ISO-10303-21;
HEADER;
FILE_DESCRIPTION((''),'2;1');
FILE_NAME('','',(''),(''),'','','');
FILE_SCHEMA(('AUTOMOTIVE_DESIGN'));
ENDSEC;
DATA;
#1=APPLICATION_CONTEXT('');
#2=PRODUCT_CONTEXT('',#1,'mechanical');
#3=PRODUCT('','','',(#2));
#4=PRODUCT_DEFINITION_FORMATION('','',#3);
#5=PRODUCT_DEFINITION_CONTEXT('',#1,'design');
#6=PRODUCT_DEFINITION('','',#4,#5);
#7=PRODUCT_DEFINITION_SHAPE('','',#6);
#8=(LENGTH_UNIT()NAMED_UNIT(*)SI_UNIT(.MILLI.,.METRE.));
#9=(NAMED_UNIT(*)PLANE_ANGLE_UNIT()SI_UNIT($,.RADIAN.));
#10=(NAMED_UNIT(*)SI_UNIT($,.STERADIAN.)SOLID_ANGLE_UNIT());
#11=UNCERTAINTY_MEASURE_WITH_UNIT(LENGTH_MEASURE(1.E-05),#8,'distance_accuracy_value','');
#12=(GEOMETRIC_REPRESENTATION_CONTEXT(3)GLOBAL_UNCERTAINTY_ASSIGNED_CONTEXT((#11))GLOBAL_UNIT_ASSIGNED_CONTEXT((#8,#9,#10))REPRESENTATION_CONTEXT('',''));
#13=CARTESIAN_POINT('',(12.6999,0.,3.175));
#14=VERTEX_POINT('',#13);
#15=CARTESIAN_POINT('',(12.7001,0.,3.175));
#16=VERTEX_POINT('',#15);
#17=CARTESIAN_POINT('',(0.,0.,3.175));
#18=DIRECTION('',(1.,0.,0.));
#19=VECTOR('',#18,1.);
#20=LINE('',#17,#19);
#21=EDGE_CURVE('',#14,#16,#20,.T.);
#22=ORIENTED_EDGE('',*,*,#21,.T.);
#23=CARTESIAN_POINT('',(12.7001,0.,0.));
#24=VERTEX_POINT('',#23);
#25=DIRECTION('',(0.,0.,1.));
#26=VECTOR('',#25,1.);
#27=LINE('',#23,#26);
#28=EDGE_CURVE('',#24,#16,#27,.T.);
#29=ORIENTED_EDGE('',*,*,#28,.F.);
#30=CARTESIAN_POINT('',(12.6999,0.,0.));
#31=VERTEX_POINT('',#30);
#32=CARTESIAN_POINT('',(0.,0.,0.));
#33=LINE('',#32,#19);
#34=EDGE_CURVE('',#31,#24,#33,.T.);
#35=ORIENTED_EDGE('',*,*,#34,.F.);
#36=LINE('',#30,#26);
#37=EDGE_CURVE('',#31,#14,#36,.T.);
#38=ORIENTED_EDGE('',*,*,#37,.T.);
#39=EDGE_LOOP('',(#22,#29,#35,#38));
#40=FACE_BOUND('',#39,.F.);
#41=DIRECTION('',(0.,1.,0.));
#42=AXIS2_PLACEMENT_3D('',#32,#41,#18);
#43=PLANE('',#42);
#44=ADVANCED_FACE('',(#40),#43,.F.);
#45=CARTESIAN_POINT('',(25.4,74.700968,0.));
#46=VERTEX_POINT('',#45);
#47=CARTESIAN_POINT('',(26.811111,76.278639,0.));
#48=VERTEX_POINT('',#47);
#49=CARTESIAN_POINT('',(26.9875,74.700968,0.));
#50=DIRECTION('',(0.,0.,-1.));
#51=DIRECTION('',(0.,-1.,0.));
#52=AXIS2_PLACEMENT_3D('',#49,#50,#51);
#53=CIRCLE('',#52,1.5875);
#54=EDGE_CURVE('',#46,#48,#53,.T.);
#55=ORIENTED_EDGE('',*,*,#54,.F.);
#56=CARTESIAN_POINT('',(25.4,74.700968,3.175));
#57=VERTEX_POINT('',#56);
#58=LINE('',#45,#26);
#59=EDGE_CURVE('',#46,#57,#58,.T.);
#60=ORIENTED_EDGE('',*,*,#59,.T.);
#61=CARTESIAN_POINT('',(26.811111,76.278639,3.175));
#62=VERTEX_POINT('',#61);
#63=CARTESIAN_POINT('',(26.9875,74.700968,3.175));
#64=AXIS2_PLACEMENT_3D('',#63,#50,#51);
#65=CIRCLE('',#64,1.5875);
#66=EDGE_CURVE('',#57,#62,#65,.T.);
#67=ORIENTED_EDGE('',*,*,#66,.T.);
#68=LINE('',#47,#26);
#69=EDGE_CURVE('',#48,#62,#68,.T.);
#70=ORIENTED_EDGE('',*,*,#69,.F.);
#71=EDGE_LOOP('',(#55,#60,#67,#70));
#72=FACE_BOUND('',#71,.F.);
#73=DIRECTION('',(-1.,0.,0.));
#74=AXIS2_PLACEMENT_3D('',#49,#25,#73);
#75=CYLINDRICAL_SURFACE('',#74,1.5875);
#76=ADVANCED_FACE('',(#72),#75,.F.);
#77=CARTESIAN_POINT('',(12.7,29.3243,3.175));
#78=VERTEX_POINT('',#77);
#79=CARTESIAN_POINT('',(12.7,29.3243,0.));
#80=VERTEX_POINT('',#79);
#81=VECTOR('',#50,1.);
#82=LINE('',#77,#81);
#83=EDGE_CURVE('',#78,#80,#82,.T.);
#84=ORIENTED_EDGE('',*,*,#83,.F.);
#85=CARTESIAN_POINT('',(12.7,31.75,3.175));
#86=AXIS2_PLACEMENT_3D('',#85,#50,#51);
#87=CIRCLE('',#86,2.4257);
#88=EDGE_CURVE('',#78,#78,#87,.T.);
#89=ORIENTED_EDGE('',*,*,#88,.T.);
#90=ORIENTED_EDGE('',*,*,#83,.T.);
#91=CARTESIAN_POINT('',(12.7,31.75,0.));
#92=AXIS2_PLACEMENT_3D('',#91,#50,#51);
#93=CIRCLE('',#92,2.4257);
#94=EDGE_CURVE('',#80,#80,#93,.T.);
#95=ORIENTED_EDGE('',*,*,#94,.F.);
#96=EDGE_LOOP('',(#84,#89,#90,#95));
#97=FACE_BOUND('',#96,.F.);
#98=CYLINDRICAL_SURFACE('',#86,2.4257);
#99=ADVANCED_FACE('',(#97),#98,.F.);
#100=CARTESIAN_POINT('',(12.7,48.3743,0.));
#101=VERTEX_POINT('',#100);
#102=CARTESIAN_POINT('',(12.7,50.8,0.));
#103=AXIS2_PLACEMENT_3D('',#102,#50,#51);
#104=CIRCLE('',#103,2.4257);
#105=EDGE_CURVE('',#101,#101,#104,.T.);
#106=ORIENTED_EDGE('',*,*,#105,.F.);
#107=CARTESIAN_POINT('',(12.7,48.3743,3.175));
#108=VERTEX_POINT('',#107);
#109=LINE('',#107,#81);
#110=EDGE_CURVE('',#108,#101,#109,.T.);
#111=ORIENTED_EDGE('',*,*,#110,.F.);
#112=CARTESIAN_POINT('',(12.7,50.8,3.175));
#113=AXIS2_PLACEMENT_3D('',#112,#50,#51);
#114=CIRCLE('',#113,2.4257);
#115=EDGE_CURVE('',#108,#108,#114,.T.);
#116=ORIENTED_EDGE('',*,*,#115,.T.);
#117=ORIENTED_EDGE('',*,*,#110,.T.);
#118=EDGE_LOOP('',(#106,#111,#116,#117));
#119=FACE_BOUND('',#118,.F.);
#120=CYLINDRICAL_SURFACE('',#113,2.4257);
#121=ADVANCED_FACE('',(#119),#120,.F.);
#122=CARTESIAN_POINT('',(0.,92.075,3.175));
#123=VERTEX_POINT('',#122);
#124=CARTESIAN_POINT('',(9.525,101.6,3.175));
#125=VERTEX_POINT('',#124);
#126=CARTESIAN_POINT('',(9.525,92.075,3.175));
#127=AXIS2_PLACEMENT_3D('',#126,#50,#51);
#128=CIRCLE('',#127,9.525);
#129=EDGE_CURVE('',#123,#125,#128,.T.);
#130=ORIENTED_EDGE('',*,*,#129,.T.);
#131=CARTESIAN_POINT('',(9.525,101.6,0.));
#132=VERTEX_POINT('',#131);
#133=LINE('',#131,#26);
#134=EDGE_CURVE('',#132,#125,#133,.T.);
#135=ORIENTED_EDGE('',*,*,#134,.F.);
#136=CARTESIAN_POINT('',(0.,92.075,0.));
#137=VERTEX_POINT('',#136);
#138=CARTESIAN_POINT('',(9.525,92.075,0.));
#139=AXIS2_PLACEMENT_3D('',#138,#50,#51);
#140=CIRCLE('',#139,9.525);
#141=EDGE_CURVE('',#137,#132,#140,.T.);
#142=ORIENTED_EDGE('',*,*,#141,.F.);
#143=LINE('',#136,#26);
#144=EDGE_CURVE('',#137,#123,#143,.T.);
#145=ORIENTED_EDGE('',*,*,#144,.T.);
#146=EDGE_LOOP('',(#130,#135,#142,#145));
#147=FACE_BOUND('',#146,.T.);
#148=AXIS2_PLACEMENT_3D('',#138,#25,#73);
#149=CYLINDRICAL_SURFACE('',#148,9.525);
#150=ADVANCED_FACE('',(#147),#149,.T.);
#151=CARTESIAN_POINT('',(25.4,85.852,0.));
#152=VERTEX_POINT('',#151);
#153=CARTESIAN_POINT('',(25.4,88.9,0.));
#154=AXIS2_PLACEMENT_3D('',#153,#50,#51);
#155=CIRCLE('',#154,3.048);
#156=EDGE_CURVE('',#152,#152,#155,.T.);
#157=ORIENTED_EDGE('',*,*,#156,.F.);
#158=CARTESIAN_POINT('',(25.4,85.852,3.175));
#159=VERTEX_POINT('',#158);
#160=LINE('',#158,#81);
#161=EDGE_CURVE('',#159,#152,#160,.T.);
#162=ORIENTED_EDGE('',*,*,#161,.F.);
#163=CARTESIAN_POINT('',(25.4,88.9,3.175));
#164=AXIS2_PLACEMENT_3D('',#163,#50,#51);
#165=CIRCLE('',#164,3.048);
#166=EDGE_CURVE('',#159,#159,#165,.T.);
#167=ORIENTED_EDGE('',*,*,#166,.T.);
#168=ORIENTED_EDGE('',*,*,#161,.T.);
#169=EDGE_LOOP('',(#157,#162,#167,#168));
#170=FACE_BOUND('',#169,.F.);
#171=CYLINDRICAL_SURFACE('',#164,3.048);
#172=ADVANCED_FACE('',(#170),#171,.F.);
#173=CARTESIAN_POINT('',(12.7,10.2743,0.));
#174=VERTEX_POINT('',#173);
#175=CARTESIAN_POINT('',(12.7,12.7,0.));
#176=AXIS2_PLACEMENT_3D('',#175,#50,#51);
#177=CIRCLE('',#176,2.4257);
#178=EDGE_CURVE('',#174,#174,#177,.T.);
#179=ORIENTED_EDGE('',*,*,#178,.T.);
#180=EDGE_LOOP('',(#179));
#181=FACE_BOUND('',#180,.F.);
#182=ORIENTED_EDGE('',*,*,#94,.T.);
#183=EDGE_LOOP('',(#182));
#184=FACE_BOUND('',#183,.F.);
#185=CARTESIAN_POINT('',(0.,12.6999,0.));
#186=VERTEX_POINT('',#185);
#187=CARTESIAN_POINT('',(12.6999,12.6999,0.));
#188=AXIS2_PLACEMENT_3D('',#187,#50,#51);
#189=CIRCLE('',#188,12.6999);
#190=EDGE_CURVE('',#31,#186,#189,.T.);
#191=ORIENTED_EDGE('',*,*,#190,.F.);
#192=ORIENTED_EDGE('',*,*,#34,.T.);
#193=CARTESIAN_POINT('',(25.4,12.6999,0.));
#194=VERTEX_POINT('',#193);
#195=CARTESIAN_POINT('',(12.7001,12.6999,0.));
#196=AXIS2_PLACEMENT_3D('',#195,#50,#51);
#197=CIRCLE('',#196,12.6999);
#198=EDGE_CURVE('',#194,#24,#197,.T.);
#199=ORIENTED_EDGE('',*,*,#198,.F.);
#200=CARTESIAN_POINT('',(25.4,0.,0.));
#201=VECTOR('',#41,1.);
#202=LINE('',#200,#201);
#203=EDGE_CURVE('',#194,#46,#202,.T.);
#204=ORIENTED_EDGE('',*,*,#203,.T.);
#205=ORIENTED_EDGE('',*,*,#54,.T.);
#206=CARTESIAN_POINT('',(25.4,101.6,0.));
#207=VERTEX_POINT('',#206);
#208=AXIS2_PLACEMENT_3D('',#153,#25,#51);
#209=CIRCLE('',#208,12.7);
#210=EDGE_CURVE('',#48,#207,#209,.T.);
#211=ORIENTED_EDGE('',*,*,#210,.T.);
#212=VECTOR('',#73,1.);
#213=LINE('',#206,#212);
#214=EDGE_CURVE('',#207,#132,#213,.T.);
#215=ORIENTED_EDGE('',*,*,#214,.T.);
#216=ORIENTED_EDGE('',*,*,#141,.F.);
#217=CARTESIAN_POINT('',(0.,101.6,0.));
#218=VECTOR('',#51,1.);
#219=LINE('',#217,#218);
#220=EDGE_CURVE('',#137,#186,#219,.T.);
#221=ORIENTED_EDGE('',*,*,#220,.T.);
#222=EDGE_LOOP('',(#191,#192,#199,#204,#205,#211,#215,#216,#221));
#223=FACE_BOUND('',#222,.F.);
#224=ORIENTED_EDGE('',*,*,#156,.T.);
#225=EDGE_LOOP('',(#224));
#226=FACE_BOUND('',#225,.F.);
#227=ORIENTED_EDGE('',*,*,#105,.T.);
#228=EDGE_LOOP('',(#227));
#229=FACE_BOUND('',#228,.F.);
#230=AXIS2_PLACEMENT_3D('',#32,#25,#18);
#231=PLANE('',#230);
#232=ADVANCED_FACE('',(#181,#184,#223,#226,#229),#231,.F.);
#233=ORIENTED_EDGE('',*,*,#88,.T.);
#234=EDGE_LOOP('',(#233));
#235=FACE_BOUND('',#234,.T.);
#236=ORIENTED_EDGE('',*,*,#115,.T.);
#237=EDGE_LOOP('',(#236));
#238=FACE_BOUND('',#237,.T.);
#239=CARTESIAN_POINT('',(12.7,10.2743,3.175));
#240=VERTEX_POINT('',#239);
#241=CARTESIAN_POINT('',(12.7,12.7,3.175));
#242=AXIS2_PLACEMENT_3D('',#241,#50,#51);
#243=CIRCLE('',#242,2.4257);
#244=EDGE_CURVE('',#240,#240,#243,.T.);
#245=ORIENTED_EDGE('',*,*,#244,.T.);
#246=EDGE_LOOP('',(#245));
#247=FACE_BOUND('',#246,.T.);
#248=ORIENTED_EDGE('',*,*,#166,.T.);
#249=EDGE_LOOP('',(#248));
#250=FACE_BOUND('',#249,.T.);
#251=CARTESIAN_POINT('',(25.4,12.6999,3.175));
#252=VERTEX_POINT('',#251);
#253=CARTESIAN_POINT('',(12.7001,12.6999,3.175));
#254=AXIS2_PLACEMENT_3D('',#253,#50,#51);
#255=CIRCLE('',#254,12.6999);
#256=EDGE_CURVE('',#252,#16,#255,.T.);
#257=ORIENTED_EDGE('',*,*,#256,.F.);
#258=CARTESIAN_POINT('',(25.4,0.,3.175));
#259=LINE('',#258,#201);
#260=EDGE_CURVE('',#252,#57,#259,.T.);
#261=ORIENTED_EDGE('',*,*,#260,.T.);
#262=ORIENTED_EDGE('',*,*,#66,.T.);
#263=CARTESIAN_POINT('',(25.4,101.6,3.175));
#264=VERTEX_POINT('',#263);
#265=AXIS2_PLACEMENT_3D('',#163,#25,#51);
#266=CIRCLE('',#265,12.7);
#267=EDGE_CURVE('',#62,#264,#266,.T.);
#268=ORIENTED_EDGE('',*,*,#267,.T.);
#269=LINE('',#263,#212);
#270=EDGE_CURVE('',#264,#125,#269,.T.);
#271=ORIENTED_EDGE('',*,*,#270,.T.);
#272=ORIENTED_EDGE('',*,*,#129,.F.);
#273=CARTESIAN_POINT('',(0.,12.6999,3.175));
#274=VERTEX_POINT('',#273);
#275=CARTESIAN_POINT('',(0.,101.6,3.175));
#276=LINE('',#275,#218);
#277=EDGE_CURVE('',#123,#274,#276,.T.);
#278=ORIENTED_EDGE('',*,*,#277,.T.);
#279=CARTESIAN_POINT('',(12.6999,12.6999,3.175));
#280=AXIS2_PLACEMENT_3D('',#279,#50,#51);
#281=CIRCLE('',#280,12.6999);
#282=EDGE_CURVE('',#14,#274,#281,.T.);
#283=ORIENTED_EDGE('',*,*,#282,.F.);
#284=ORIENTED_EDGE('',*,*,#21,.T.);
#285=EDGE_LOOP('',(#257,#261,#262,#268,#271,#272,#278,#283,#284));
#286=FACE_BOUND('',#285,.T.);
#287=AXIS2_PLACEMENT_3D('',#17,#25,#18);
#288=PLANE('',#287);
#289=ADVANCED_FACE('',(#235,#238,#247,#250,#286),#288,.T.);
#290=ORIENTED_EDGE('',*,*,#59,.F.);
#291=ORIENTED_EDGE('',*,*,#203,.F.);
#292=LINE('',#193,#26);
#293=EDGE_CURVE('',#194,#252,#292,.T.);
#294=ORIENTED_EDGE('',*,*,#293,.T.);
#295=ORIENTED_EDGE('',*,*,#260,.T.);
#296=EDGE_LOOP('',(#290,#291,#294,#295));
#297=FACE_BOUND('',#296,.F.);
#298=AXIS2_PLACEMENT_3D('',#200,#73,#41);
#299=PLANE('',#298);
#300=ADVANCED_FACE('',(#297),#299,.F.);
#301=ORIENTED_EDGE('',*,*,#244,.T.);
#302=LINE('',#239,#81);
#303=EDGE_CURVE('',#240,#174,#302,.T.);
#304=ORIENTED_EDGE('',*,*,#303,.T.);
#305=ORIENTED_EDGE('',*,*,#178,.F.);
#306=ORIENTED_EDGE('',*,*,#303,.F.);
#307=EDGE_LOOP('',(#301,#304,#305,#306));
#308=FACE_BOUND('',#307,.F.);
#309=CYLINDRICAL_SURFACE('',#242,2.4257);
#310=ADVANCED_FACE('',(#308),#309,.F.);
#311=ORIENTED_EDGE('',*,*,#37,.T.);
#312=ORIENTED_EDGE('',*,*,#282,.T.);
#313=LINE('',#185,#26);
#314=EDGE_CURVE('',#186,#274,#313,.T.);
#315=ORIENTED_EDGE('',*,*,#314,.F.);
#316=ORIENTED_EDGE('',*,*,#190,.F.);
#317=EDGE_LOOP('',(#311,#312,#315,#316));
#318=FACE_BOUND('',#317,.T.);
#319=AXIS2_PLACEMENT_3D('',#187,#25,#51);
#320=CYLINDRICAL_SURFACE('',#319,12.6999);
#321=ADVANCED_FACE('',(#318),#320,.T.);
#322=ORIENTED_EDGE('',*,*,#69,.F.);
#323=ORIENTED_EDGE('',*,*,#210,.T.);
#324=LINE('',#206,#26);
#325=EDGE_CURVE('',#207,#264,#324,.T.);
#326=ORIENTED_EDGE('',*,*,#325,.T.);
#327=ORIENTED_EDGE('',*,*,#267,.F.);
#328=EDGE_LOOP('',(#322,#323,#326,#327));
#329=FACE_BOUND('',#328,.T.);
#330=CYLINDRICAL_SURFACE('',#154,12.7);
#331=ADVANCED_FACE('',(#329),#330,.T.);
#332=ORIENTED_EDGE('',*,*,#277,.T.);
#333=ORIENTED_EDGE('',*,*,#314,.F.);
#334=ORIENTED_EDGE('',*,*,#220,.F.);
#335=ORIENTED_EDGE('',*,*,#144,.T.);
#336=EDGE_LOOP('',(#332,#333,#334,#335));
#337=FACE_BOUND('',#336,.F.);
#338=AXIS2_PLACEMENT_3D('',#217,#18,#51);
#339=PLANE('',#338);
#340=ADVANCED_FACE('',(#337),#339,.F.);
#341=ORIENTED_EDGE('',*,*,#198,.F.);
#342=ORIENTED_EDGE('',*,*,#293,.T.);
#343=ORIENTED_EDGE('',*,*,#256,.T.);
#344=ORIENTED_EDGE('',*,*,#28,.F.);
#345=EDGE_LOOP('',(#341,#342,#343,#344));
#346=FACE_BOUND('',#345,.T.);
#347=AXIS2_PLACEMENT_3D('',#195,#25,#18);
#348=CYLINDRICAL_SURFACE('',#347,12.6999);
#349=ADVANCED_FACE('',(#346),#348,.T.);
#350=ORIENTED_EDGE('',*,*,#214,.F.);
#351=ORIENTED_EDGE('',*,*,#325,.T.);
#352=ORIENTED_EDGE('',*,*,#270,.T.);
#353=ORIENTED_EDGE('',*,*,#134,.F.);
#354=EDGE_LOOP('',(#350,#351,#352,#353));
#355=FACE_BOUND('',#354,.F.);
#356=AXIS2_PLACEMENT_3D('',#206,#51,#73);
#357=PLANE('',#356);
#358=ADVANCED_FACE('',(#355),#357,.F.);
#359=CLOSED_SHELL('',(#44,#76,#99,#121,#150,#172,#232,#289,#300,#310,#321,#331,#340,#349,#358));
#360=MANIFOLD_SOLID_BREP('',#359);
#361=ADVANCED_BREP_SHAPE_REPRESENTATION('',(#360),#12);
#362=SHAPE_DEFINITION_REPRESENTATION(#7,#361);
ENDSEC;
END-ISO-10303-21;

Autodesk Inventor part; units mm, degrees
ref_plane "YZ Plane" through (0, 0, 0) normal (1, 0, 0) x (0, 1, 0)
ref_plane "XZ Plane" through (0, 0, 0) normal (0, 1, 0) x (-1, 0, 0)
ref_plane "XY Plane" through (0, 0, 0) normal (0, 0, 1) x (1, 0, 0)
sketch "Sketch1" plane through (0, 0, 0) normal (0, 0, 1) x (1, 0, 0)
  line L0 (0, 0) -> (25.4, 0)
  line L1 (25.4, 0) -> (25.4, 101.6)
  line L2 (25.4, 101.6) -> (0, 101.6)
  line L3 (0, 101.6) -> (0, 0)
  arc A0 (25.4, 76.2) -> (25.4, 101.6) centre (25.4, 88.9) ccw
  dimension "d0" = 101.6
  dimension "d1" = 25.4
  dimension "d2" = 25.4
extrude "Extrusion1" add sketch "Sketch1" along normal blind 3.175
sketch "Sketch3" plane through (0, 0, 3.175) normal (0, 0, 1) x (1, 0, 0)
  line L0 (0, 101.6) -> (0, 0) projected
  line L1 (0, 0) -> (25.4, 0) projected
  line L2 (25.4, 101.6) -> (0, 101.6) projected
  line L3 (25.4, 0) -> (25.4, 76.2) projected
  line L4 (0, 0) -> (25.4, 0)
  line L5 (25.4, 0) -> (25.4, 63.5)
  line L6 (25.4, 63.5) -> (0, 63.5)
  line L7 (0, 63.5) -> (0, 0)
  point P0 (12.7, 50.8)
  point P1 (12.7, 12.7)
  point P2 (12.7, 31.75)
  point P3 (12.7, 0)
  dimension "d50" = 12.7
  dimension "d53" = 38.1
  dimension "d54" = 63.5
  dimension "d55" = 19.05
hole "Hole1" at (12.7, 50.8, 3.175) at (12.7, 12.7, 3.175) at (12.7, 31.75, 3.175) direction (0, 0, -1) diameter 4.8514 end through all
sketch "Sketch4" plane through (0, 0, 3.175) normal (0, 0, 1) x (1, 0, 0)
  line L0 (25.4, 0) -> (25.4, 76.2) projected
  arc A0 (25.4, 76.2) -> (25.4, 101.6) centre (25.4, 88.9) ccw projected
  point P0 (0, 0)
hole "Hole2" at (25.4, 88.9, 3.175) direction (0, 0, -1) diameter 6.096 end through all clearance for "Flat Head Machine Screw (82)" size "#12" standard "Ansi Unified Screw Threads"
fillet "Fillet1" radius 9.525 1 edges at (0, 101.6, 1.5875)
fillet "Fillet2" radius 1.5875 1 edges at (25.4, 76.2, 1.5875)
fillet "Fillet3" radius 12.7 2 edges at (25.4, 0, 1.5875) (0, 0, 1.5875)
equation "\"d2\" = d1"
properties part number "CLB_027_LifterBracket.ipt" material "Aluminum 6061"
